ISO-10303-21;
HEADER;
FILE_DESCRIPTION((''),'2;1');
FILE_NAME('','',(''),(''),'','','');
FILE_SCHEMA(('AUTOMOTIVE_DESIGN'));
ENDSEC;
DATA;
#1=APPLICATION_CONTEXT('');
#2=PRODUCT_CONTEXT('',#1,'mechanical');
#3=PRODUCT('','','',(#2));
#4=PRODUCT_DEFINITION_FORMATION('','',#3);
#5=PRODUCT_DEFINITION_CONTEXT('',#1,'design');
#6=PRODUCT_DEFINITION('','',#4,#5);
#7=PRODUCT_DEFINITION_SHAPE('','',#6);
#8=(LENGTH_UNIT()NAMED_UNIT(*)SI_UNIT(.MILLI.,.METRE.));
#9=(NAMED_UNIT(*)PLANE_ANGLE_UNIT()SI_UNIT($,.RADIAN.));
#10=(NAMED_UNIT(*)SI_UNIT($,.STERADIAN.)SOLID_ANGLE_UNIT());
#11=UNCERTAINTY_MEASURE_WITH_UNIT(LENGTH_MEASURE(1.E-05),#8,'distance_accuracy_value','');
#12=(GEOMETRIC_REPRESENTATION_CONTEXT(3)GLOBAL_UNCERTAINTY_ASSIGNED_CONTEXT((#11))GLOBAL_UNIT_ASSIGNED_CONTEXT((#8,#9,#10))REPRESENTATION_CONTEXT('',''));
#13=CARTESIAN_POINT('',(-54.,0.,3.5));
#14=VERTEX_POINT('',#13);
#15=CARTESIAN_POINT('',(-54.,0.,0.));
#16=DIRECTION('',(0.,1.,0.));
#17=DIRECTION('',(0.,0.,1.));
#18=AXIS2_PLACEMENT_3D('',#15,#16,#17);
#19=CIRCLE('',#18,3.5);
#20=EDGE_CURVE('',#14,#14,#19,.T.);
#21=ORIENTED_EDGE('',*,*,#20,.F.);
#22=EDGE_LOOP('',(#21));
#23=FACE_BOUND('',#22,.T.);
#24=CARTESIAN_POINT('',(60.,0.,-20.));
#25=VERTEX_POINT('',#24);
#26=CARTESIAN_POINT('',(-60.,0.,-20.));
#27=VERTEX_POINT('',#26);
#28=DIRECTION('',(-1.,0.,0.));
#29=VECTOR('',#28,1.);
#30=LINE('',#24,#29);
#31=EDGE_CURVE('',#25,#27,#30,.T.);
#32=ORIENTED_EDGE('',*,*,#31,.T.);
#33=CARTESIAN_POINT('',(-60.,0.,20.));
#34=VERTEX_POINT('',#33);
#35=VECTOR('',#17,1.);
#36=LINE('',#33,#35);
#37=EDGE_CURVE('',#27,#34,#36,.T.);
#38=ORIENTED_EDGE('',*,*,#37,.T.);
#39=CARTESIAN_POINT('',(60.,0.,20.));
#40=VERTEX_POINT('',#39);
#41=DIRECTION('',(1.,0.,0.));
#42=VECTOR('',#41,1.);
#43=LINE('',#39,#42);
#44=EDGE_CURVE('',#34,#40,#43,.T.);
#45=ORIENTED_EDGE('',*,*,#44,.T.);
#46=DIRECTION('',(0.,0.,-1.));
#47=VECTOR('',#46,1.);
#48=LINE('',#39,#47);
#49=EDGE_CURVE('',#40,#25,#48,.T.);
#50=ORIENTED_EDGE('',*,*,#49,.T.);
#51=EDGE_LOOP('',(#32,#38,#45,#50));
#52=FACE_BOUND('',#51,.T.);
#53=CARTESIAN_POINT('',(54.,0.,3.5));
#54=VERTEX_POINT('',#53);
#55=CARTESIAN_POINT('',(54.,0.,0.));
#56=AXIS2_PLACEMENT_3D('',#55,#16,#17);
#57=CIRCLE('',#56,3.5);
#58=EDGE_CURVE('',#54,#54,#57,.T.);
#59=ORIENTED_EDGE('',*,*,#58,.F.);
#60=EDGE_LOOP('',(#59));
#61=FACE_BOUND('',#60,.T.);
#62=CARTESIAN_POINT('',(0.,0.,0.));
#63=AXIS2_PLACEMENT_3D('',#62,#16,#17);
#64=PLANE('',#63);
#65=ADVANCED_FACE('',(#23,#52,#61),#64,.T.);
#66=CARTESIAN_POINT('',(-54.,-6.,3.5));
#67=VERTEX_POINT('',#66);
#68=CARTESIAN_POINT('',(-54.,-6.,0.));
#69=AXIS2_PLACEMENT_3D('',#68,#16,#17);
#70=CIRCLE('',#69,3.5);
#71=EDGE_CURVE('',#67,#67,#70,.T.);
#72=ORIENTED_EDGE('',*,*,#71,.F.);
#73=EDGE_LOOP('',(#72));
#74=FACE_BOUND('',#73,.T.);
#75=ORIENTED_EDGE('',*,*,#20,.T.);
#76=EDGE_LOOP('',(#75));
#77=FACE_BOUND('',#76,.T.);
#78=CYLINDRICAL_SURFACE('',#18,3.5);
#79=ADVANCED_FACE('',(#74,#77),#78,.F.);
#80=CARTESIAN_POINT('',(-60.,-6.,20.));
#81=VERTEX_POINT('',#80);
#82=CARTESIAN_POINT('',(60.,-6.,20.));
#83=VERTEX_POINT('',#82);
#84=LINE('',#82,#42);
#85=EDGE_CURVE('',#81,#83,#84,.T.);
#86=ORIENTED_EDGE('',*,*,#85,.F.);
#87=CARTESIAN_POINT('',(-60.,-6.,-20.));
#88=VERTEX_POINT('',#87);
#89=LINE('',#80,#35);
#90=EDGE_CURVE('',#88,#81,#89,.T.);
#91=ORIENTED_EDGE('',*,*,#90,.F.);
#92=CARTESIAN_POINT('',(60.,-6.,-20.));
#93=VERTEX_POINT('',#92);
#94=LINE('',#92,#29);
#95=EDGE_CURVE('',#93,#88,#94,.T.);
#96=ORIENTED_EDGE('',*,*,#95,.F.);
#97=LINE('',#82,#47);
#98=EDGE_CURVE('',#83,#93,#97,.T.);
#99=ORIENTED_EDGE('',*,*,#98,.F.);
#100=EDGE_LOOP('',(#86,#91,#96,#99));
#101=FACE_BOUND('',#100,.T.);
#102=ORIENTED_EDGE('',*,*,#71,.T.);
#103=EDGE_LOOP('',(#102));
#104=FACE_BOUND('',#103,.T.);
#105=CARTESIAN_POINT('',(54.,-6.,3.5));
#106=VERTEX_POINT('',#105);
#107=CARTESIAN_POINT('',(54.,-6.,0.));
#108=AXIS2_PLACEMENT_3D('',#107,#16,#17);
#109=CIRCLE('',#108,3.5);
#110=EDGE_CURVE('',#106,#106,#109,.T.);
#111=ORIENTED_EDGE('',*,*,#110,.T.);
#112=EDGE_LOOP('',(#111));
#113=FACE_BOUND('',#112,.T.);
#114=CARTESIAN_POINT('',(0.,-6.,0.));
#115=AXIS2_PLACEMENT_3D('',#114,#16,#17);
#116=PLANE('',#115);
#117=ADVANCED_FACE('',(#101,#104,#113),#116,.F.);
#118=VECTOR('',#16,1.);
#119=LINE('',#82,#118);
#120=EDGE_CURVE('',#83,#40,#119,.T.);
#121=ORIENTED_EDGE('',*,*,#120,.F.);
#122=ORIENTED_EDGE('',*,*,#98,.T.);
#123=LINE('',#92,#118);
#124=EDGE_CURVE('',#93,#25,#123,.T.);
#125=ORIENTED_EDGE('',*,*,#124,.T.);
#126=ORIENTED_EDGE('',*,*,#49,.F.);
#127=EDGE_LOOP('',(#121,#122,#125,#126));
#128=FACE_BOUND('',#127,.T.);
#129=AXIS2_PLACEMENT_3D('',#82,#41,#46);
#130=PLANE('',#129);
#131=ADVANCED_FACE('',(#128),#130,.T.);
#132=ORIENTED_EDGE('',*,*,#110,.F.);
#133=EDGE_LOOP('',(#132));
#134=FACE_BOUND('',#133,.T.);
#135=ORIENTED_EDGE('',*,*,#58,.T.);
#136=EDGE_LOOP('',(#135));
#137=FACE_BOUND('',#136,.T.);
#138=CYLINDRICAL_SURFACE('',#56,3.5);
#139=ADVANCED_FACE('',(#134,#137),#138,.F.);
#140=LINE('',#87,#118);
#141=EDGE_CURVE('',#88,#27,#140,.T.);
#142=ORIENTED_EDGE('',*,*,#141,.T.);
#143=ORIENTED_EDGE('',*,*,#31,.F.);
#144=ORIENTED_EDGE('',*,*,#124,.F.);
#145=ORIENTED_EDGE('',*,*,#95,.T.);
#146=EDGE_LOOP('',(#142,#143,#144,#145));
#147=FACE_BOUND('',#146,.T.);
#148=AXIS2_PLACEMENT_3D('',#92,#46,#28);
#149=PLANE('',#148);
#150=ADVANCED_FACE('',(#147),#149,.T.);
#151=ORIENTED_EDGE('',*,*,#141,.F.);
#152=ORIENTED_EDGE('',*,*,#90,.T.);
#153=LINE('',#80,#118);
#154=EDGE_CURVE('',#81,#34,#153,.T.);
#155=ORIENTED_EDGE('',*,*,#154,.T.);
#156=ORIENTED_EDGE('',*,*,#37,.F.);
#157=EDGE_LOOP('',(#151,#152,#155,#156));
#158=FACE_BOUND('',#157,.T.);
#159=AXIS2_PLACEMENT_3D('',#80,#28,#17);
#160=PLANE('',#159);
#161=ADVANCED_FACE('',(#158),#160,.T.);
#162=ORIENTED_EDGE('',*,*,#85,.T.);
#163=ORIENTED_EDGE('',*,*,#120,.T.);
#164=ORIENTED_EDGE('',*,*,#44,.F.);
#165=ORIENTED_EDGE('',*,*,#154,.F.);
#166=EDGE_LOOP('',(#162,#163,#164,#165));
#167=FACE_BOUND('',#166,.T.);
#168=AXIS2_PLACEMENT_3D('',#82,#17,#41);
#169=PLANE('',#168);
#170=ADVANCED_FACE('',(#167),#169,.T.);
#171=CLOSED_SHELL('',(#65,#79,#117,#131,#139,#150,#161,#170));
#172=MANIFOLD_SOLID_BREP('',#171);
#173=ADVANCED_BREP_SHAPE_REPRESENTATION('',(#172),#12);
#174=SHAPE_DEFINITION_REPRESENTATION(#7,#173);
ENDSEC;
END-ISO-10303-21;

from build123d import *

# Parameters (mm, degrees)
ESQUISSE1_W               = 120
ESQUISSE1_H               = 40
T_LE_DE_BASE_PLI_E1_DEPTH = 6
D_GAGEMENT_M61_D          = 7


# Sheet-metal steps are written as plain solids
with BuildPart() as part:
    # Esquisse1 → Tôle de base pliée1 (new body)
    with BuildSketch(Plane(origin=(0, 0, 0), x_dir=(1, 0, 0), z_dir=(0, 1, 0))):
        Rectangle(ESQUISSE1_W, ESQUISSE1_H)
    extrude(amount=-T_LE_DE_BASE_PLI_E1_DEPTH)

    # Dégagement M61 (through all)
    with Locations(Plane(origin=(0, 0, 0), x_dir=(1, 0, 0), z_dir=(0, 1, 0))):
        with Locations((54, 0), (-54, 0)):
            Hole(D_GAGEMENT_M61_D / 2)


solid = part.part
